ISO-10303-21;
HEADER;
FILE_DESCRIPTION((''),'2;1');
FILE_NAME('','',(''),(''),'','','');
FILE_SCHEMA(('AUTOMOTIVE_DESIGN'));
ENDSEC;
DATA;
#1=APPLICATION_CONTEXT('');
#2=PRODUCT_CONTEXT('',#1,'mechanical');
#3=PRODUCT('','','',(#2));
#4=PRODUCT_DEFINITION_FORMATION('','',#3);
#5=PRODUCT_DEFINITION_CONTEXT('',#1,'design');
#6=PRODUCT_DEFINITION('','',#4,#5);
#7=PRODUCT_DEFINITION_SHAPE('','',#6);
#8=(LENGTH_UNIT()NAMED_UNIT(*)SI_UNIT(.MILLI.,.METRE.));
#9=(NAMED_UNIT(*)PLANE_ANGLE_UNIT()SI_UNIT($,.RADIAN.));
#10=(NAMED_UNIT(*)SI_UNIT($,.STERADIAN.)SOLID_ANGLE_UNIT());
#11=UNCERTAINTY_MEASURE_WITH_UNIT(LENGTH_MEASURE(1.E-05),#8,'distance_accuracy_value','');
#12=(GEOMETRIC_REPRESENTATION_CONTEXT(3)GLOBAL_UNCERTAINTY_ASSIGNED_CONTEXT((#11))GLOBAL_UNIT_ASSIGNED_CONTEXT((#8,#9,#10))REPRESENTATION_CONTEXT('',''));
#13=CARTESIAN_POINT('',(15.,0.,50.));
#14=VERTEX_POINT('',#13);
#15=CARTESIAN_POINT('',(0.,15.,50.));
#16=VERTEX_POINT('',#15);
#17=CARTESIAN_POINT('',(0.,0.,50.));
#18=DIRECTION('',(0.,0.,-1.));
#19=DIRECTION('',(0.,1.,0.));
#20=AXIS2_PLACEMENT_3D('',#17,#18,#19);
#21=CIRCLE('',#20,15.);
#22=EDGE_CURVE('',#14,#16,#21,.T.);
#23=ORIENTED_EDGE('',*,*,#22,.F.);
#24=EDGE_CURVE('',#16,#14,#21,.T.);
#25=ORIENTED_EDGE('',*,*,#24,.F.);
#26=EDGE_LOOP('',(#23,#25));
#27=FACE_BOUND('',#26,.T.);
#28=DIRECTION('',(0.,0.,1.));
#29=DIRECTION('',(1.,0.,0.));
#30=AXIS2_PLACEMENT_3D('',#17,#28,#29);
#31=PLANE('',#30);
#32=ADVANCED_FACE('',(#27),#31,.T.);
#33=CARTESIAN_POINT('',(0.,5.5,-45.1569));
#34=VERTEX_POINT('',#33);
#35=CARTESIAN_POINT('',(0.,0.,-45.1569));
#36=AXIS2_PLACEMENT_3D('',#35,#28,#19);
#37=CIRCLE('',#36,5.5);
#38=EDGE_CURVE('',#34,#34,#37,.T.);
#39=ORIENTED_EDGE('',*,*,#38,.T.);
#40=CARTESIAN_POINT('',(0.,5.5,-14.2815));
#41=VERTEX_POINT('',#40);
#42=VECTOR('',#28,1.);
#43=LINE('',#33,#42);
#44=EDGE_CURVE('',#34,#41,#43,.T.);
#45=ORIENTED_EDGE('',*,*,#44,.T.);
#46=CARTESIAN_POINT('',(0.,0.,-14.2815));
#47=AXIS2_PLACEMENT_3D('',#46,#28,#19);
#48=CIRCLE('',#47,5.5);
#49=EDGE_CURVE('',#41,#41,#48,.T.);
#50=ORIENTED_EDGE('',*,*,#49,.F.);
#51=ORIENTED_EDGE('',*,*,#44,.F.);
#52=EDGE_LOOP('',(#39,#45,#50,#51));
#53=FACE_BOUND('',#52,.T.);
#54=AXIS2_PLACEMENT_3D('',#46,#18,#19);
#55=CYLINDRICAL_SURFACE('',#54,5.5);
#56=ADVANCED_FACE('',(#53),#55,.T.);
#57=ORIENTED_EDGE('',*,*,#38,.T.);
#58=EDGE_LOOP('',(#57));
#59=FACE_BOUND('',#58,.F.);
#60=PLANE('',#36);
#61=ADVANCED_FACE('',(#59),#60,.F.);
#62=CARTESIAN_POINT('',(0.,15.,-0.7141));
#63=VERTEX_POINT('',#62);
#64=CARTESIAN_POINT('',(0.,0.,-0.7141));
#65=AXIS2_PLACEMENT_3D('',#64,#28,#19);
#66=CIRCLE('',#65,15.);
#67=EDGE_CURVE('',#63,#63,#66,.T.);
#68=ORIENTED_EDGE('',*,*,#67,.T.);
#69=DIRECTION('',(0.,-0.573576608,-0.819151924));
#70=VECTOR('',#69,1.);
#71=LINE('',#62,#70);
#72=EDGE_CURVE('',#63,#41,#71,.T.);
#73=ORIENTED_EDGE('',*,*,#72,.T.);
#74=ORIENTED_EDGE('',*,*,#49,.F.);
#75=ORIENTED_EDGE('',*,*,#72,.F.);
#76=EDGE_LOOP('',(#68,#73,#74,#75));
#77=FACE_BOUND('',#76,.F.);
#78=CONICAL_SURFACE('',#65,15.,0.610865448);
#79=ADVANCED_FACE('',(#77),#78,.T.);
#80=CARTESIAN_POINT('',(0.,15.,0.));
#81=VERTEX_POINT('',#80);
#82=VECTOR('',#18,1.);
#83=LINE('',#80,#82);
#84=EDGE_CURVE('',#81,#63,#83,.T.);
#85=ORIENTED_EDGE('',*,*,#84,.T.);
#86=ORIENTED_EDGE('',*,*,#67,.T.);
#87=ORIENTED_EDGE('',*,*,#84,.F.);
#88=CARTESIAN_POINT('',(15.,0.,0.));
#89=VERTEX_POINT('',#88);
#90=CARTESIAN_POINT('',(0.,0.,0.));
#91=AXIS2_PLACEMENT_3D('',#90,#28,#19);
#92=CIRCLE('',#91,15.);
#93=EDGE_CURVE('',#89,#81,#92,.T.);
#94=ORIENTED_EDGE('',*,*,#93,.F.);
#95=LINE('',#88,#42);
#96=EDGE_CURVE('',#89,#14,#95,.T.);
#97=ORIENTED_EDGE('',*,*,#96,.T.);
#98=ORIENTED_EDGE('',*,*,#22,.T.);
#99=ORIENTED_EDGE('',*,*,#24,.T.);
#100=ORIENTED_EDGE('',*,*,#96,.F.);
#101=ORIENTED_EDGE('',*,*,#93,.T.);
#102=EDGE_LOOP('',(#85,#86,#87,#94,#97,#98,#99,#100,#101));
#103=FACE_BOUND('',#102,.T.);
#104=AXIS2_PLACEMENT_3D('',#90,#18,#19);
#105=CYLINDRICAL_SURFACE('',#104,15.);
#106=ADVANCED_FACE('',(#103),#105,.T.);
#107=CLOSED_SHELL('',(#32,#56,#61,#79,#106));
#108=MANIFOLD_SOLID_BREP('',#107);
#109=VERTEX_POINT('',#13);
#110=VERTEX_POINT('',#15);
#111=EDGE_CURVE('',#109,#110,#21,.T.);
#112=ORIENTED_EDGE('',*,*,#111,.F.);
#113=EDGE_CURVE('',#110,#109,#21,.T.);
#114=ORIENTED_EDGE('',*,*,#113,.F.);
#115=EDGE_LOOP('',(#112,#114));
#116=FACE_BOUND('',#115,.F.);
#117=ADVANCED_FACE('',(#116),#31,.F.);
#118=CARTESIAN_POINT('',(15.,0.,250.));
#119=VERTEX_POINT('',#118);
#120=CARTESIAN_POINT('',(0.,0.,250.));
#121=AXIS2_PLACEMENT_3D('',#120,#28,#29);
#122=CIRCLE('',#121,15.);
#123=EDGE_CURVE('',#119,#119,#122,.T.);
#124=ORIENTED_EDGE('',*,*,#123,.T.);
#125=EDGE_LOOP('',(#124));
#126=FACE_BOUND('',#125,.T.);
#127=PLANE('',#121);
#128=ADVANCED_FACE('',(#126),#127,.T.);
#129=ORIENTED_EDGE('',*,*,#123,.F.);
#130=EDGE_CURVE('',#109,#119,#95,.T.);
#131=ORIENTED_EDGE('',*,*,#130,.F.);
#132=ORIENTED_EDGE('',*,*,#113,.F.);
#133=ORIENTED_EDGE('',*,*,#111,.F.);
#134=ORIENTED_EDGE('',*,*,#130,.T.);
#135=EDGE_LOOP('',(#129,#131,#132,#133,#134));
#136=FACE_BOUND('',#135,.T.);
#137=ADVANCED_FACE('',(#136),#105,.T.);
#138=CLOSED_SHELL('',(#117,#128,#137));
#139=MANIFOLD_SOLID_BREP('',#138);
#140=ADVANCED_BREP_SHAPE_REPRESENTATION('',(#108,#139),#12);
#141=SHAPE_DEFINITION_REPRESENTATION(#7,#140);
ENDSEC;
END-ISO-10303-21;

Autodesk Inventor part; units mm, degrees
ref_plane "YZ Plane" through (0, 0, 0) normal (1, 0, 0) x (0, 1, 0)
ref_plane "XZ Plane" through (0, 0, 0) normal (0, 1, 0) x (-1, 0, 0)
sketch "Sketch1" plane through (0, 0, 0) normal (1, 0, 0) x (0, 1, 0)
  line L0 (0, 0) -> (15, 0)
  line L1 (0, 0) -> (5.5, 0)
  line L2 (0, 0) -> (11, 0)
  line L3 (15, -0.7141) -> (5.5, -14.2815)
  line L4 (15.5, 0) -> (35.4603, 0) construction
  line L5 (5.5, -14.2815) -> (5.5, -19.2815)
  line L6 (5.5, -19.2815) -> (11, -45.1569) construction
  line L7 (5.5, -19.2815) -> (64.4036, -19.2815) construction
  line L8 (0, 0) -> (11, 0)
  line L9 (11, 0) -> (11, -45.1569) construction
  line L10 (5.5, -19.2815) -> (5.5, -62.0623)
  line L11 (5.5, -45.1569) -> (0, -45.1569)
  line L12 (0, 0) -> (0, -45.1569)
  line L13 (0, -74.4747) -> (0, 12.4125) projected
  line L14 (0, 0) -> (15, 0)
  line L15 (15, 0) -> (15, -0.7141)
  line L16 (15, -19.2815) -> (15, -27.5658)
  dimension "d17" = 5.5
  dimension "d22" = 15.5
  dimension "d23" = 125
  dimension "d24" = 5
  dimension "d25" = 78
  dimension "d27" = 11
  dimension "d28" = 45.157
  dimension "d30" = 15
revolve "Revolution2" add sketch "Sketch1" angle 360 about axis through (0, 0, -10) along (0, 0, 1)
sketch "Sketch2" plane through (0, 0, 0) normal (0, 0, 1) x (1, 0, 0)
  circle A0 centre (0, 0) radius 15
  dimension "d31" = 30
extrude "Extrusion1" add sketch "Sketch2" along normal blind 250
ref_plane "Work Plane1" through (0, 0, 50) normal (0, 0, 1) x (1, 0, 0)
split body "Split1" result two bodies by plane through (0, 0, 50) normal (0, 0, 1) first body at (14.453, -1.1668, 183.3333)
properties part number "nozzle mould tool"
